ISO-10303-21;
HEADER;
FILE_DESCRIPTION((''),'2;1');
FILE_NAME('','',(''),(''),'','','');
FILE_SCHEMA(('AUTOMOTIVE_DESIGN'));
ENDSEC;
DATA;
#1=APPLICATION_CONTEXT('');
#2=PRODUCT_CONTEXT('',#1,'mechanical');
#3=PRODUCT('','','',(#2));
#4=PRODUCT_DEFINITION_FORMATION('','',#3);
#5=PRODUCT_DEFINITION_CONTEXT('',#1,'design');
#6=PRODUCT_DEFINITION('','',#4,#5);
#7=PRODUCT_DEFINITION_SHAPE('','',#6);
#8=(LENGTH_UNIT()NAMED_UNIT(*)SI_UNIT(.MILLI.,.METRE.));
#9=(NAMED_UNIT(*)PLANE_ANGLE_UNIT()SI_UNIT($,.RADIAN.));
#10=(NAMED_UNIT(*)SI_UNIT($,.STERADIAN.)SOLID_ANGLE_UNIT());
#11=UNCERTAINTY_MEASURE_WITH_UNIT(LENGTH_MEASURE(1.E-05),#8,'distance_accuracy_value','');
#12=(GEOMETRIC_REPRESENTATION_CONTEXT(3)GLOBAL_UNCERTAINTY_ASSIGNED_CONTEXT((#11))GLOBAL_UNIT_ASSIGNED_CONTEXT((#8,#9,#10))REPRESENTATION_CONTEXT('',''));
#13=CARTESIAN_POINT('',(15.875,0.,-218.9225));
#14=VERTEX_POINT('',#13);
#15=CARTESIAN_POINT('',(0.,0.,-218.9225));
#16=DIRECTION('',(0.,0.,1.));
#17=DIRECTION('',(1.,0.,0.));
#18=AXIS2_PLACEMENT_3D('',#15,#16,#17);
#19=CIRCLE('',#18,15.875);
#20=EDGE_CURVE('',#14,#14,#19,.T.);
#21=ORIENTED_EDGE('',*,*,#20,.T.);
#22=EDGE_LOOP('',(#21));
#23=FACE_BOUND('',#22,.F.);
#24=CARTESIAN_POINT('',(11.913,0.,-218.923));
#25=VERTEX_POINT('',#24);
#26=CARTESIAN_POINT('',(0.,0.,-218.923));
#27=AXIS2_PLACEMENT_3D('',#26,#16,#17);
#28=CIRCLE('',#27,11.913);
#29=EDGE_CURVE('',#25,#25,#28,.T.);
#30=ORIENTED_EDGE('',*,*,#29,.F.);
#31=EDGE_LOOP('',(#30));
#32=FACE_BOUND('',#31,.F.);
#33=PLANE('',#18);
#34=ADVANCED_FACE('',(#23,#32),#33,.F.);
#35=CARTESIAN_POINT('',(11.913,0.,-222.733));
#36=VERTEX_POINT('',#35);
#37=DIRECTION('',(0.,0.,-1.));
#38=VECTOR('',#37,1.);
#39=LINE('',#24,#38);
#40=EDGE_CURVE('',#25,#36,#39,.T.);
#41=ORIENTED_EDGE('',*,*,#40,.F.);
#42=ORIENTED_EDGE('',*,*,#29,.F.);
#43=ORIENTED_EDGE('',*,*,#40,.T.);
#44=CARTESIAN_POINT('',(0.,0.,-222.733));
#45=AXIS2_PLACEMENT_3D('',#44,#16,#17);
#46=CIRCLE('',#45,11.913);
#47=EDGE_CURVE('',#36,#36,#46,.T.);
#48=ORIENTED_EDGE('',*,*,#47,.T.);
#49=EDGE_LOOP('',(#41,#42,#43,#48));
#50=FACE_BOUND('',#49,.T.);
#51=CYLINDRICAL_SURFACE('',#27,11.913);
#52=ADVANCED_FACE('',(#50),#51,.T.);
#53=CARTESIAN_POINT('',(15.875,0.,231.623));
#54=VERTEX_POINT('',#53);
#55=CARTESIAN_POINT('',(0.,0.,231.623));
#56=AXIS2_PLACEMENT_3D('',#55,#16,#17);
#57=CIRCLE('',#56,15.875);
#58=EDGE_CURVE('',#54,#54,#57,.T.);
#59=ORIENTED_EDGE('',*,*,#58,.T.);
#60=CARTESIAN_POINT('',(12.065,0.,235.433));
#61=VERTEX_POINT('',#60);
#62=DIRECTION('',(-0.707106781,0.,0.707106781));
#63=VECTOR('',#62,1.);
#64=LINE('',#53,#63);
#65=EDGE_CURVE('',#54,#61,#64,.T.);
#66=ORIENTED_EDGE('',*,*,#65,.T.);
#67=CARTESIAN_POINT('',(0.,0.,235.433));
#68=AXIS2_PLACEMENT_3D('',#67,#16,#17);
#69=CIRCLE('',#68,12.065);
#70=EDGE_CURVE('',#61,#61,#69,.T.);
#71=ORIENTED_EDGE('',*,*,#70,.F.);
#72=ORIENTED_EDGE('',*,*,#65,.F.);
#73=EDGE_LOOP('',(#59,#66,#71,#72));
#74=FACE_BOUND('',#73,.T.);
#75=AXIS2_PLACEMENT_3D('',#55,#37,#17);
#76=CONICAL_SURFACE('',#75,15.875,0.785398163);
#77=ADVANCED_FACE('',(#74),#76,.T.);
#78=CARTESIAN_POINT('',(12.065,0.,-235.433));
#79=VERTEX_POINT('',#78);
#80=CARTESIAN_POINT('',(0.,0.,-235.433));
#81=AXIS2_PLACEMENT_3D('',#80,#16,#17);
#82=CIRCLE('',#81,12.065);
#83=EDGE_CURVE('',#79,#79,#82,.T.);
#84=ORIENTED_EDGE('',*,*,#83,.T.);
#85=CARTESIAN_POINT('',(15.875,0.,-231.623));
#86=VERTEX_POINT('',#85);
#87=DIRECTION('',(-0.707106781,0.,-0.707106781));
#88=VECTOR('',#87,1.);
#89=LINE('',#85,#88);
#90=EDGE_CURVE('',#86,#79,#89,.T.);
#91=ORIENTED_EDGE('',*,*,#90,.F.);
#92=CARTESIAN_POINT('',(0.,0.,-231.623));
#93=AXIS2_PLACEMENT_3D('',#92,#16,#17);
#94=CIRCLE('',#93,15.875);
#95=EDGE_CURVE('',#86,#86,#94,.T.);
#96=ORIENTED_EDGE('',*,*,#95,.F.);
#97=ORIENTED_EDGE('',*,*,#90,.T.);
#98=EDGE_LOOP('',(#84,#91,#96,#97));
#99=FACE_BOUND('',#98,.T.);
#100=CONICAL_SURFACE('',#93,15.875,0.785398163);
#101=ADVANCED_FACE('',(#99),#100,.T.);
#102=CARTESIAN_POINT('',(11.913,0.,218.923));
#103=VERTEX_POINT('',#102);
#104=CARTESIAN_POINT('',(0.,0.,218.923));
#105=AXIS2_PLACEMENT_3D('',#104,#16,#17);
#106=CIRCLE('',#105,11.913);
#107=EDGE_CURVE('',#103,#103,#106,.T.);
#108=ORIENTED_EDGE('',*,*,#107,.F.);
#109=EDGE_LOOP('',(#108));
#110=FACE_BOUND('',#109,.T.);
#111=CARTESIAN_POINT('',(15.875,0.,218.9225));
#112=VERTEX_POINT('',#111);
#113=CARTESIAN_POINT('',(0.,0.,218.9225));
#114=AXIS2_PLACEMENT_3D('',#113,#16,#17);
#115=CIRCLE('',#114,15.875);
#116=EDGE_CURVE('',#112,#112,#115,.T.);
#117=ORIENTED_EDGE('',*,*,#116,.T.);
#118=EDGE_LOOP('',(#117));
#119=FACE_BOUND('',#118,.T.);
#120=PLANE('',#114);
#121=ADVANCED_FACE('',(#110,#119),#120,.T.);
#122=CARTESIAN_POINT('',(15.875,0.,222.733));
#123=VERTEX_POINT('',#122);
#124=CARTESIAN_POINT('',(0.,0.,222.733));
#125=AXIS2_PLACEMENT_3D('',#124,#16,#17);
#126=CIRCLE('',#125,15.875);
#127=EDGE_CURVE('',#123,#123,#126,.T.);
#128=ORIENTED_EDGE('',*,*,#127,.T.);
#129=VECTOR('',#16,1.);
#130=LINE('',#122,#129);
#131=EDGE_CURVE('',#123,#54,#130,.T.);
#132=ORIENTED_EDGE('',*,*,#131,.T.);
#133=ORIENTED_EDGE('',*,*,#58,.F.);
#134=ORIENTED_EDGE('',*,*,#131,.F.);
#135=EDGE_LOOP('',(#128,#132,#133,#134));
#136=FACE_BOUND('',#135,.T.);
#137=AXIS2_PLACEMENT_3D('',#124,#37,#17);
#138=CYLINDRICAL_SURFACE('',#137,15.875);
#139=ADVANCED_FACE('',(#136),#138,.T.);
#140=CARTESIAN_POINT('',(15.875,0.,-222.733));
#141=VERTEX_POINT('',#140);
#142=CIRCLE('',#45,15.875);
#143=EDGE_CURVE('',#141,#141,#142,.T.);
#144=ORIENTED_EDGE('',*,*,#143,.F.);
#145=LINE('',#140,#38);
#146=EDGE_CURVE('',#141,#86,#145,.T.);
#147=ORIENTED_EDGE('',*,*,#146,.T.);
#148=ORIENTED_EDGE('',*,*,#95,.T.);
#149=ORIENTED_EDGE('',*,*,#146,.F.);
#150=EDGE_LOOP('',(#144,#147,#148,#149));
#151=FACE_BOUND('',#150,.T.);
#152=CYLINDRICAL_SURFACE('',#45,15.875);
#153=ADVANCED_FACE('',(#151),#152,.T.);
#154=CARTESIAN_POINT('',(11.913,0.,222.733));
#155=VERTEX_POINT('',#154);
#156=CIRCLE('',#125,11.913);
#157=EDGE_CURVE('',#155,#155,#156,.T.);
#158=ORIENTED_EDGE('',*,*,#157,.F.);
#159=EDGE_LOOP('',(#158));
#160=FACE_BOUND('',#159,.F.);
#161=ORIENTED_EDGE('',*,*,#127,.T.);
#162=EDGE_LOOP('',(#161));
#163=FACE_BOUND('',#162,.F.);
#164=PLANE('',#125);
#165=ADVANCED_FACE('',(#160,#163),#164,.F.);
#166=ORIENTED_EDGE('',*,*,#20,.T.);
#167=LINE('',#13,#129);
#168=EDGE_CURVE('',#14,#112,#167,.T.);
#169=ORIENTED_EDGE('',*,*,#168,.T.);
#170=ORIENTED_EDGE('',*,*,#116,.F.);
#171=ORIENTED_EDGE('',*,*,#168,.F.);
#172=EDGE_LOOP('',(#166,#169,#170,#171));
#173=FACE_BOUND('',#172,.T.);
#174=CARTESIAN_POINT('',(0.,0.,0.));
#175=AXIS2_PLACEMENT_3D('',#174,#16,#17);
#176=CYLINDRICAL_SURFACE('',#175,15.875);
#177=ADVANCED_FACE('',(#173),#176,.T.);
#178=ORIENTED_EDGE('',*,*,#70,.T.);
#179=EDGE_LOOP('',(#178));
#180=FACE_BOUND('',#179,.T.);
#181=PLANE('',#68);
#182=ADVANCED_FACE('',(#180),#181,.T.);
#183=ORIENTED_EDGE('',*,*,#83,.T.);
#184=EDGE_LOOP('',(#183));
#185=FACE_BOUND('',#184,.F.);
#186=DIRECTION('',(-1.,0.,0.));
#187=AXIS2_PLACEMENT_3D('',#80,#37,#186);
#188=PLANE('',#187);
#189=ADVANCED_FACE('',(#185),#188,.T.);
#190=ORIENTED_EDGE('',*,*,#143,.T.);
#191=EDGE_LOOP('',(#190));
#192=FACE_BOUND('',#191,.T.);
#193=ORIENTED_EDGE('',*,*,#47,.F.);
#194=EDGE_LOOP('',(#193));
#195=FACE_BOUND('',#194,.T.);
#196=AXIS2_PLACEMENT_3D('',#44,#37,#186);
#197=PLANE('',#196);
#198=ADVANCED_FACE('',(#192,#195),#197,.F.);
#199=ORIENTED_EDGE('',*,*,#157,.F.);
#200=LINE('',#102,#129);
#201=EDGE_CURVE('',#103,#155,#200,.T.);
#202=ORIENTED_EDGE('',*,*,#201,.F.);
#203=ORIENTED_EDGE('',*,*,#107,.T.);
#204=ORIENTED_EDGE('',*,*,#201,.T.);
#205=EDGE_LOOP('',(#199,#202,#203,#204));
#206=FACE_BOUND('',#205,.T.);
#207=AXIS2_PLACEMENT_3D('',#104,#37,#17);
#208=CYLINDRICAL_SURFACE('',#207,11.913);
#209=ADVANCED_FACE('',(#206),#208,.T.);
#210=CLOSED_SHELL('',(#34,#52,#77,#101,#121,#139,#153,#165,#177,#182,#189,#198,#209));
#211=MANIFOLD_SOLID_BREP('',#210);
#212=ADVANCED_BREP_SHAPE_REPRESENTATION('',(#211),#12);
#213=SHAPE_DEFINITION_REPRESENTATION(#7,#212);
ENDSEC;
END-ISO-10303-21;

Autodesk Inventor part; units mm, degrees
ref_plane "YZ Plane" through (0, 0, 0) normal (1, 0, 0) x (0, 1, 0)
ref_plane "XZ Plane" through (0, 0, 0) normal (0, 1, 0) x (-1, 0, 0)
ref_plane "XY Plane" through (0, 0, 0) normal (0, 0, 1) x (1, 0, 0)
sketch "Sketch1" plane through (0, 0, 0) normal (0, 0, 1) x (1, 0, 0)
  circle A0 centre (0, 0) radius 1.5875
  dimension "d0" = 3.175
extrude "Extrusion1" add sketch "Sketch1" along normal mid plane 43.7845
sketch "Sketch2" plane through (0, 0, 21.8923) normal (0, 0, 1) x (1, 0, 0)
  circle A0 centre (0, 0) radius 1.1913
  dimension "d3" = 2.3825
extrude "Extrusion2" add sketch "Sketch2" along normal blind 0.381
sketch "Sketch3" plane through (0, 0, 22.2733) normal (0, 0, 1) x (1, 0, 0)
  circle A0 centre (0, 0) radius 1.5875
  dimension "d6" = 3.175
extrude "Extrusion3" add sketch "Sketch3" along normal blind 1.27
chamfer "Chamfer1" distance 0.381 angle 45 1 edges at (-1.5875, 0, 23.5433)
mirror "Mirror1" about plane through (0, 0, 0) normal (0, 0, 1) of "Extrusion3", "Chamfer1", "Extrusion1", "Extrusion2"
ref_plane "Work Plane1" through (0, 0, 0) normal (0, 0, 1) x (1, 0, 0)
scale "Scale1" factors (10, 10, 10) then translate (0, 0, 0) bodies 1
properties part number "Front Lower Hinge Pin"
